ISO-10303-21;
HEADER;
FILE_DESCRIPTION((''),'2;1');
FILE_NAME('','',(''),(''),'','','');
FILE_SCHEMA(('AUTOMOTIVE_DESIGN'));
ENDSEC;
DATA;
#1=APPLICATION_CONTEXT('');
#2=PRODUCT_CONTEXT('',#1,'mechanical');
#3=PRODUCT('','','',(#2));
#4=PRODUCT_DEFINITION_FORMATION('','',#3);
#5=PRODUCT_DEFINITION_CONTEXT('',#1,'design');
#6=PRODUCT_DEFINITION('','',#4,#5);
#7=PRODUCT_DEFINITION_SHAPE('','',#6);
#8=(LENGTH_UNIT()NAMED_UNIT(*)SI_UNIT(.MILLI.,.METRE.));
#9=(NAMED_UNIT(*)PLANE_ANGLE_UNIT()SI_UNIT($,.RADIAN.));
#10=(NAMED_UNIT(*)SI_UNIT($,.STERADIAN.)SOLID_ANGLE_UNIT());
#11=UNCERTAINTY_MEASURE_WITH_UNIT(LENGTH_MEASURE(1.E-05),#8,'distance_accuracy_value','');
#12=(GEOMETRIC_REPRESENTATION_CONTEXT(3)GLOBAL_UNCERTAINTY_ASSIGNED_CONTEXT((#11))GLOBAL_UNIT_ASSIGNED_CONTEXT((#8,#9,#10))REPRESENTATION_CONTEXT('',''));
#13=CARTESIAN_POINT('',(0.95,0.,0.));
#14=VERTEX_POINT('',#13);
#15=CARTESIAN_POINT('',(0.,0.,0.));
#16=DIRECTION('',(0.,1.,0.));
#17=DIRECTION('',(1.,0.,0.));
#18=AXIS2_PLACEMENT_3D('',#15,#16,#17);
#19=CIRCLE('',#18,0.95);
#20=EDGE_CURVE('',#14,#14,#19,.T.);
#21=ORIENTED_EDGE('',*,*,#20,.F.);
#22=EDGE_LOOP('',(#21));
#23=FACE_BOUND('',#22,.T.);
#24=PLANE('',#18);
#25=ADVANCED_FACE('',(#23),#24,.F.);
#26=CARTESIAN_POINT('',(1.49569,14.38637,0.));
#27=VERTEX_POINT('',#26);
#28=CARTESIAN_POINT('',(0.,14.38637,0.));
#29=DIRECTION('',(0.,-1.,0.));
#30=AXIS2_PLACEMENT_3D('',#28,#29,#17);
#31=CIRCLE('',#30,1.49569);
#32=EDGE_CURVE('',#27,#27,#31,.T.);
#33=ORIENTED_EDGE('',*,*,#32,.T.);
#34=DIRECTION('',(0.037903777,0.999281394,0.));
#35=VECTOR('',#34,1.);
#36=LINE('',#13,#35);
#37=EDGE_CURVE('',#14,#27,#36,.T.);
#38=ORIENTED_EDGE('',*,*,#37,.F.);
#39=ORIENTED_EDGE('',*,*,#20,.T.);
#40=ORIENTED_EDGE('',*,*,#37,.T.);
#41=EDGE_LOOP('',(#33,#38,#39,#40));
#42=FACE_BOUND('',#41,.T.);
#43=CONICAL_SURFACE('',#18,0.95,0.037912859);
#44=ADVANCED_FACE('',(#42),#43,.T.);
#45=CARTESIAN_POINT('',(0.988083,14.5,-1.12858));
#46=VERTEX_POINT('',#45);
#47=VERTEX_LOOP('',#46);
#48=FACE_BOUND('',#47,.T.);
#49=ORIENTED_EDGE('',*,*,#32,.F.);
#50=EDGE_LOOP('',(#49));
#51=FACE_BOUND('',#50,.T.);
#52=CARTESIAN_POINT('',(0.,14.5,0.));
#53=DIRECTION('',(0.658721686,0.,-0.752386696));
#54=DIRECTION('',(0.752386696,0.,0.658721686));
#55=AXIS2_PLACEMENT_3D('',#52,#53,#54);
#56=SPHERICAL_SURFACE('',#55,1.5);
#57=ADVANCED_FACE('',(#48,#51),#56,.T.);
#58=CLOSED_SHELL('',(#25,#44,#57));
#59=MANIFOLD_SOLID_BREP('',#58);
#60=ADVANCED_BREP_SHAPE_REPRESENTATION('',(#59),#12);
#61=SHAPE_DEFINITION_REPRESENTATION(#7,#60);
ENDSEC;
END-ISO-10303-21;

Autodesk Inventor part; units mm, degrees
ref_plane "YZ Plane" through (0, 0, 0) normal (1, 0, 0) x (0, 1, 0)
ref_plane "XZ Plane" through (0, 0, 0) normal (0, 1, 0) x (-1, 0, 0)
ref_plane "XY Plane" through (0, 0, 0) normal (0, 0, 1) x (1, 0, 0)
sketch "Sketch1" plane through (0, 0, 0) normal (0, 0, 1) x (1, 0, 0)
  line L0 (0, 0) -> (0.95, 0)
  line L1 (0.95, 0) -> (1.5, 14.5)
  line L2 (0, 0) -> (0, 14.5)
  line L3 (0, 14.5) -> (1.5, 14.5)
  dimension "d0" = 14.5
  dimension "d1" = 0.95
  dimension "d2" = 1.5
revolve "Revolution1" add sketch "Sketch1" angle 360 about axis through (0, 0, 0) along (0, 1, 0)
sketch "Sketch2" plane through (0, 14.5, 0) normal (0, 1, 0) x (1, 0, 0)
  circle A0 centre (0, 0) radius 1.5
  circle A1 centre (0, 0) radius 1.5 projected
  line L0 (-0.9881, -1.1286) -> (0.9881, 1.1286)
revolve "Revolution2" add sketch "Sketch2" angle 360 about axis through (-0.9881, 14.5, 1.1286) along (0.6587096, 0, -0.7523973) picked at (0.7723, -0.1849) contours A0 L0
properties part number "switch_stem" material "Stainless Steel"
